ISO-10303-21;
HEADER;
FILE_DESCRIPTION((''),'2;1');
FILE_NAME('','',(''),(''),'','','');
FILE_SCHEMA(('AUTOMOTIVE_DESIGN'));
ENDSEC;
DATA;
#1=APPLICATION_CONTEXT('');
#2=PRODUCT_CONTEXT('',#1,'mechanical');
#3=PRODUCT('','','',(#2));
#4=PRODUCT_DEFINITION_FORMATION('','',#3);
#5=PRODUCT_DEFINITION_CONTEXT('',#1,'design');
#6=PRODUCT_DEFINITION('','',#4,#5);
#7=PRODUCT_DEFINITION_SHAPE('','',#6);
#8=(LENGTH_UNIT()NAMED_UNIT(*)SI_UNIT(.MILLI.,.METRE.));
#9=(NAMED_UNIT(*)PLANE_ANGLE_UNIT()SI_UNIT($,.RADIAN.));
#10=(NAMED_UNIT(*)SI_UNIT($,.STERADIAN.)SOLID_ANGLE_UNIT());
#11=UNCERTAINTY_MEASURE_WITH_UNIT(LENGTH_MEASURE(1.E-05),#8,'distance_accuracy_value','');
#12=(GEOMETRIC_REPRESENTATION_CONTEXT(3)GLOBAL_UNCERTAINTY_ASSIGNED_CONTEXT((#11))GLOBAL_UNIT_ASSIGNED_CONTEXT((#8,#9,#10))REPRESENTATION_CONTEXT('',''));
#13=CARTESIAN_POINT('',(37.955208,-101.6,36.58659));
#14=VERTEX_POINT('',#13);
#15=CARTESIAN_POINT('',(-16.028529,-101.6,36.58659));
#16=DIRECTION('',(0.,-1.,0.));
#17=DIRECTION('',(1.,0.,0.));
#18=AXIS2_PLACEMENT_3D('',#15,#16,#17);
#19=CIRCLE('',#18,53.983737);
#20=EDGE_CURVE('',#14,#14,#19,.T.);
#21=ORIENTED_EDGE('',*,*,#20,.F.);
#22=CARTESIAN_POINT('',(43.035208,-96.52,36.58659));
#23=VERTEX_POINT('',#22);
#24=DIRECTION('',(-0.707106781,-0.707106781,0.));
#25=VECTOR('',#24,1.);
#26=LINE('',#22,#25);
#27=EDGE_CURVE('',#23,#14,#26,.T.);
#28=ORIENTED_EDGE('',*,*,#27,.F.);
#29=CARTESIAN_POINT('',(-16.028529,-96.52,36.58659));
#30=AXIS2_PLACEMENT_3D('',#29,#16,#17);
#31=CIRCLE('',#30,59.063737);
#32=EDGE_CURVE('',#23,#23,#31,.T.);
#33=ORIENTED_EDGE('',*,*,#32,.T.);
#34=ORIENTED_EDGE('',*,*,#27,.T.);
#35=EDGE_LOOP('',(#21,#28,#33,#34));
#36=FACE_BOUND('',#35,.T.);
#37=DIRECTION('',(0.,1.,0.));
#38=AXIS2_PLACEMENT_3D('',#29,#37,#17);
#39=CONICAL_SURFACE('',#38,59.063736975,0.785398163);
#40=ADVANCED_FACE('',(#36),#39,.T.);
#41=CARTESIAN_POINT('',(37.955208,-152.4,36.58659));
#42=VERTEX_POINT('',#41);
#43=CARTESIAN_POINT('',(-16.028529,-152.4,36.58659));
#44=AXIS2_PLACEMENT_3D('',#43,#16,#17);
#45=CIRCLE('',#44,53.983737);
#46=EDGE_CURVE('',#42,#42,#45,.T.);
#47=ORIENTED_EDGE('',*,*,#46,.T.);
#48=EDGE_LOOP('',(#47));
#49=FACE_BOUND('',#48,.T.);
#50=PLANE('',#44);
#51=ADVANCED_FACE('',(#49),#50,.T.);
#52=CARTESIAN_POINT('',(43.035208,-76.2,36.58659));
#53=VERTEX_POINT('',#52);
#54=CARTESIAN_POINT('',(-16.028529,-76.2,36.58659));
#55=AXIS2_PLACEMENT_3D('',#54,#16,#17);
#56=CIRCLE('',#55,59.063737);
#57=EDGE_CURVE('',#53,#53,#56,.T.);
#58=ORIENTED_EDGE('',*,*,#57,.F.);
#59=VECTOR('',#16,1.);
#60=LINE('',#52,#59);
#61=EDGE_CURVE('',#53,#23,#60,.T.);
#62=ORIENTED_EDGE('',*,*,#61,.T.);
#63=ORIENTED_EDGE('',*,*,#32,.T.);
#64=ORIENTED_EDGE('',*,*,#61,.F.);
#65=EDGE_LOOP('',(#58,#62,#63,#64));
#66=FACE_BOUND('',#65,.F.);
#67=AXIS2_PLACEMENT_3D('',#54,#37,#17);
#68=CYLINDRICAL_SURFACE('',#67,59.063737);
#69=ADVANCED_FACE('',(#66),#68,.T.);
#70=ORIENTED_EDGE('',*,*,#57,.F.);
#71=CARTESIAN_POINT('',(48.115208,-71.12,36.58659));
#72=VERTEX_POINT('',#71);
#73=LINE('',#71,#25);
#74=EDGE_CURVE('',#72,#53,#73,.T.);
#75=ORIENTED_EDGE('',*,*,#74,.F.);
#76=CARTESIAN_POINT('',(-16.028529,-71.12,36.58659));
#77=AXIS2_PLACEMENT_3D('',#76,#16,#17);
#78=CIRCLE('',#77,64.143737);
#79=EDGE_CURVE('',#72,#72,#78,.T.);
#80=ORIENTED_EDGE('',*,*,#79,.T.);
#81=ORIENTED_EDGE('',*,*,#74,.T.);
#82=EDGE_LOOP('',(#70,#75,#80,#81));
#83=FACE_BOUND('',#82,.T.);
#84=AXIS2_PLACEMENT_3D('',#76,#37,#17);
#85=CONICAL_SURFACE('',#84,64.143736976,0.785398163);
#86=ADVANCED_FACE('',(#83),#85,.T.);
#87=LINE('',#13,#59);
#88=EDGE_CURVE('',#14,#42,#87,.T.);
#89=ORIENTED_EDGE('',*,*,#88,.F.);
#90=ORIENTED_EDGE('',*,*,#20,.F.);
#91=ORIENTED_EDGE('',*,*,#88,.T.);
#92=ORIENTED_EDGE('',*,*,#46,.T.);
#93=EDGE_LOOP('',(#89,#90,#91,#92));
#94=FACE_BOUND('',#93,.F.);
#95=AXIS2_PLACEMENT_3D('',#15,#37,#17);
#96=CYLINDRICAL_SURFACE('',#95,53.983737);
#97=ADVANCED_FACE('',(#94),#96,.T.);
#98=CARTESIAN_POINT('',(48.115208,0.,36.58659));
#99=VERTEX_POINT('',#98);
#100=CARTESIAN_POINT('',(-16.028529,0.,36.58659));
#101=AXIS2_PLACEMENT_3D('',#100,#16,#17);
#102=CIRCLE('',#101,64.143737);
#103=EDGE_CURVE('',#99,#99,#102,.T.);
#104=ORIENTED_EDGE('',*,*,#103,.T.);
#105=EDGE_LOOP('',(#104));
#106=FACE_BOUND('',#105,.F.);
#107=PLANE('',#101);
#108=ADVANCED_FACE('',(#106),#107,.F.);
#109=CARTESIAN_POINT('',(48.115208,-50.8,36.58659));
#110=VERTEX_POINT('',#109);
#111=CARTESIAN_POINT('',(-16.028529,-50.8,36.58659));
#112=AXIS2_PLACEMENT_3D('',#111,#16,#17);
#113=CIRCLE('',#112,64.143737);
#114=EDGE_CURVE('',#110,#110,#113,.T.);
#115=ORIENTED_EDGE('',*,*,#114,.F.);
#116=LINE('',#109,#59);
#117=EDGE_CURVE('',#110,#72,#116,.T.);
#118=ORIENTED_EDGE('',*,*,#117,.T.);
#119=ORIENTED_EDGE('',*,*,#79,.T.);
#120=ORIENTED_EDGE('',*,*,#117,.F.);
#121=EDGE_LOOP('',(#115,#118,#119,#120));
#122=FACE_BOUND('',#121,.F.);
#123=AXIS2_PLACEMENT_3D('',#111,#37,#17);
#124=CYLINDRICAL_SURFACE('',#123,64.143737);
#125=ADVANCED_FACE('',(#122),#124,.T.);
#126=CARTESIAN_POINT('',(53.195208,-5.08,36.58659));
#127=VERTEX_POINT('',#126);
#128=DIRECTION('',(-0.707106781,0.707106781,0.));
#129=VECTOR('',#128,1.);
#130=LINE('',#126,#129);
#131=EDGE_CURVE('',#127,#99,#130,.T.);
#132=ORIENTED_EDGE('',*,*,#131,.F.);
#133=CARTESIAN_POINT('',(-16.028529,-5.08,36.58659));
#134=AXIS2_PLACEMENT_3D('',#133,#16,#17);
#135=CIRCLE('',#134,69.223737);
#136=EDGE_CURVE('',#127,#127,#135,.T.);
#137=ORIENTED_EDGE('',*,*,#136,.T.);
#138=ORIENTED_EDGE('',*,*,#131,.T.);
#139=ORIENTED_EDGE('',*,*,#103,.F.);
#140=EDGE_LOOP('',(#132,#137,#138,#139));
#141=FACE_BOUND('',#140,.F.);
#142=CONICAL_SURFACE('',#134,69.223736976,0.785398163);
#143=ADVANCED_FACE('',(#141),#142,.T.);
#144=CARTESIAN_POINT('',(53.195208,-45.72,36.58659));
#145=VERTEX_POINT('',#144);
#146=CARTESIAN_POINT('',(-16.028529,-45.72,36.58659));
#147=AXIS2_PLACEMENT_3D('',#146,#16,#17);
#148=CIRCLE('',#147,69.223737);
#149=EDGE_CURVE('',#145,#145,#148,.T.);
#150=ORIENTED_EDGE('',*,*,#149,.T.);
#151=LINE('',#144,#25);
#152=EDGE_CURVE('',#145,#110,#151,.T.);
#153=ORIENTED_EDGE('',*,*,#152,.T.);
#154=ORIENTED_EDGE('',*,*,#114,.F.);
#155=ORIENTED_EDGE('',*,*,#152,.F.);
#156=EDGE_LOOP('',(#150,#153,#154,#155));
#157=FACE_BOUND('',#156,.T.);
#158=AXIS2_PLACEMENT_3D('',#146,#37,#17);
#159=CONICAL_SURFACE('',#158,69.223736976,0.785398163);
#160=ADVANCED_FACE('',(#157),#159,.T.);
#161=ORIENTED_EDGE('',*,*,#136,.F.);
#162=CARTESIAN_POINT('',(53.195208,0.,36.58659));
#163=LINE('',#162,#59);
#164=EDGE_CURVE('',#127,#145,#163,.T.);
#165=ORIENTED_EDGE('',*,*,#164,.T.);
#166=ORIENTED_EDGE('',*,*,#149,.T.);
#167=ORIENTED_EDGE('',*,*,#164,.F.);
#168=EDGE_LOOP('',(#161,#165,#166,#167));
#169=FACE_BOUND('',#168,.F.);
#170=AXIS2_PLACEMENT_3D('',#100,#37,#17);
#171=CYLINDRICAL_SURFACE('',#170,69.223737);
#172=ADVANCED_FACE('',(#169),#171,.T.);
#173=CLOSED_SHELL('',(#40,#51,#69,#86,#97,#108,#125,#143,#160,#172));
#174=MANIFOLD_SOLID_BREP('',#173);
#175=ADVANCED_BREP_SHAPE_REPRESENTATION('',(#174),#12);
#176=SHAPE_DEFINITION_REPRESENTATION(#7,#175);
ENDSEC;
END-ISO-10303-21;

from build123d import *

# Parameters (mm, degrees)
F0_R     = 69.2237369755
F1_DEPTH = 50.8
F2_SIZE  = 5.08
F3_DEPTH = 25.4
F4_SIZE  = 5.08
F5_DEPTH = 25.4
F6_SIZE  = 5.08
F7_DEPTH = 50.8


with BuildPart() as f1:
    # F0 (on Front) → F1 (new body)
    with BuildSketch(Plane.XZ):
        with Locations((-16.0285290331, 36.5865901113)):
            Circle(F0_R)
    extrude(amount=F1_DEPTH)

    # F2
    f2_edges = [f1.edges().sort_by_distance(p)[0] for p in [
        (53.195208, -25.4, 36.58659),
        (-85.252266, 0, 36.58659),
        (-85.252266, -50.8, 36.58659),
    ]]
    chamfer(f2_edges, length=F2_SIZE)

    # F3 (add): a face of the model
    f3_faces = [f1.faces().sort_by_distance(p)[0] for p in [
        (-16.0285290331, -50.8, 36.5865901113),
    ]]
    extrude(f3_faces, amount=F3_DEPTH)

    # F4
    f4_edges = [f1.edges().sort_by_distance(p)[0] for p in [
        (-80.172266, -76.2, 36.58659),
    ]]
    chamfer(f4_edges, length=F4_SIZE)

    # F5 (add): a face of the model
    f5_faces = [f1.faces().sort_by_distance(p)[0] for p in [
        (-16.0285290331, -76.2, 36.5865901113),
    ]]
    extrude(f5_faces, amount=F5_DEPTH)

    # F6
    f6_edges = [f1.edges().sort_by_distance(p)[0] for p in [
        (-75.092266, -101.6, 36.58659),
    ]]
    chamfer(f6_edges, length=F6_SIZE)

    # F7 (add): a face of the model
    f7_faces = [f1.faces().sort_by_distance(p)[0] for p in [
        (-16.0285290331, -101.6, 36.5865901113),
    ]]
    extrude(f7_faces, amount=F7_DEPTH)


solid = f1.part
